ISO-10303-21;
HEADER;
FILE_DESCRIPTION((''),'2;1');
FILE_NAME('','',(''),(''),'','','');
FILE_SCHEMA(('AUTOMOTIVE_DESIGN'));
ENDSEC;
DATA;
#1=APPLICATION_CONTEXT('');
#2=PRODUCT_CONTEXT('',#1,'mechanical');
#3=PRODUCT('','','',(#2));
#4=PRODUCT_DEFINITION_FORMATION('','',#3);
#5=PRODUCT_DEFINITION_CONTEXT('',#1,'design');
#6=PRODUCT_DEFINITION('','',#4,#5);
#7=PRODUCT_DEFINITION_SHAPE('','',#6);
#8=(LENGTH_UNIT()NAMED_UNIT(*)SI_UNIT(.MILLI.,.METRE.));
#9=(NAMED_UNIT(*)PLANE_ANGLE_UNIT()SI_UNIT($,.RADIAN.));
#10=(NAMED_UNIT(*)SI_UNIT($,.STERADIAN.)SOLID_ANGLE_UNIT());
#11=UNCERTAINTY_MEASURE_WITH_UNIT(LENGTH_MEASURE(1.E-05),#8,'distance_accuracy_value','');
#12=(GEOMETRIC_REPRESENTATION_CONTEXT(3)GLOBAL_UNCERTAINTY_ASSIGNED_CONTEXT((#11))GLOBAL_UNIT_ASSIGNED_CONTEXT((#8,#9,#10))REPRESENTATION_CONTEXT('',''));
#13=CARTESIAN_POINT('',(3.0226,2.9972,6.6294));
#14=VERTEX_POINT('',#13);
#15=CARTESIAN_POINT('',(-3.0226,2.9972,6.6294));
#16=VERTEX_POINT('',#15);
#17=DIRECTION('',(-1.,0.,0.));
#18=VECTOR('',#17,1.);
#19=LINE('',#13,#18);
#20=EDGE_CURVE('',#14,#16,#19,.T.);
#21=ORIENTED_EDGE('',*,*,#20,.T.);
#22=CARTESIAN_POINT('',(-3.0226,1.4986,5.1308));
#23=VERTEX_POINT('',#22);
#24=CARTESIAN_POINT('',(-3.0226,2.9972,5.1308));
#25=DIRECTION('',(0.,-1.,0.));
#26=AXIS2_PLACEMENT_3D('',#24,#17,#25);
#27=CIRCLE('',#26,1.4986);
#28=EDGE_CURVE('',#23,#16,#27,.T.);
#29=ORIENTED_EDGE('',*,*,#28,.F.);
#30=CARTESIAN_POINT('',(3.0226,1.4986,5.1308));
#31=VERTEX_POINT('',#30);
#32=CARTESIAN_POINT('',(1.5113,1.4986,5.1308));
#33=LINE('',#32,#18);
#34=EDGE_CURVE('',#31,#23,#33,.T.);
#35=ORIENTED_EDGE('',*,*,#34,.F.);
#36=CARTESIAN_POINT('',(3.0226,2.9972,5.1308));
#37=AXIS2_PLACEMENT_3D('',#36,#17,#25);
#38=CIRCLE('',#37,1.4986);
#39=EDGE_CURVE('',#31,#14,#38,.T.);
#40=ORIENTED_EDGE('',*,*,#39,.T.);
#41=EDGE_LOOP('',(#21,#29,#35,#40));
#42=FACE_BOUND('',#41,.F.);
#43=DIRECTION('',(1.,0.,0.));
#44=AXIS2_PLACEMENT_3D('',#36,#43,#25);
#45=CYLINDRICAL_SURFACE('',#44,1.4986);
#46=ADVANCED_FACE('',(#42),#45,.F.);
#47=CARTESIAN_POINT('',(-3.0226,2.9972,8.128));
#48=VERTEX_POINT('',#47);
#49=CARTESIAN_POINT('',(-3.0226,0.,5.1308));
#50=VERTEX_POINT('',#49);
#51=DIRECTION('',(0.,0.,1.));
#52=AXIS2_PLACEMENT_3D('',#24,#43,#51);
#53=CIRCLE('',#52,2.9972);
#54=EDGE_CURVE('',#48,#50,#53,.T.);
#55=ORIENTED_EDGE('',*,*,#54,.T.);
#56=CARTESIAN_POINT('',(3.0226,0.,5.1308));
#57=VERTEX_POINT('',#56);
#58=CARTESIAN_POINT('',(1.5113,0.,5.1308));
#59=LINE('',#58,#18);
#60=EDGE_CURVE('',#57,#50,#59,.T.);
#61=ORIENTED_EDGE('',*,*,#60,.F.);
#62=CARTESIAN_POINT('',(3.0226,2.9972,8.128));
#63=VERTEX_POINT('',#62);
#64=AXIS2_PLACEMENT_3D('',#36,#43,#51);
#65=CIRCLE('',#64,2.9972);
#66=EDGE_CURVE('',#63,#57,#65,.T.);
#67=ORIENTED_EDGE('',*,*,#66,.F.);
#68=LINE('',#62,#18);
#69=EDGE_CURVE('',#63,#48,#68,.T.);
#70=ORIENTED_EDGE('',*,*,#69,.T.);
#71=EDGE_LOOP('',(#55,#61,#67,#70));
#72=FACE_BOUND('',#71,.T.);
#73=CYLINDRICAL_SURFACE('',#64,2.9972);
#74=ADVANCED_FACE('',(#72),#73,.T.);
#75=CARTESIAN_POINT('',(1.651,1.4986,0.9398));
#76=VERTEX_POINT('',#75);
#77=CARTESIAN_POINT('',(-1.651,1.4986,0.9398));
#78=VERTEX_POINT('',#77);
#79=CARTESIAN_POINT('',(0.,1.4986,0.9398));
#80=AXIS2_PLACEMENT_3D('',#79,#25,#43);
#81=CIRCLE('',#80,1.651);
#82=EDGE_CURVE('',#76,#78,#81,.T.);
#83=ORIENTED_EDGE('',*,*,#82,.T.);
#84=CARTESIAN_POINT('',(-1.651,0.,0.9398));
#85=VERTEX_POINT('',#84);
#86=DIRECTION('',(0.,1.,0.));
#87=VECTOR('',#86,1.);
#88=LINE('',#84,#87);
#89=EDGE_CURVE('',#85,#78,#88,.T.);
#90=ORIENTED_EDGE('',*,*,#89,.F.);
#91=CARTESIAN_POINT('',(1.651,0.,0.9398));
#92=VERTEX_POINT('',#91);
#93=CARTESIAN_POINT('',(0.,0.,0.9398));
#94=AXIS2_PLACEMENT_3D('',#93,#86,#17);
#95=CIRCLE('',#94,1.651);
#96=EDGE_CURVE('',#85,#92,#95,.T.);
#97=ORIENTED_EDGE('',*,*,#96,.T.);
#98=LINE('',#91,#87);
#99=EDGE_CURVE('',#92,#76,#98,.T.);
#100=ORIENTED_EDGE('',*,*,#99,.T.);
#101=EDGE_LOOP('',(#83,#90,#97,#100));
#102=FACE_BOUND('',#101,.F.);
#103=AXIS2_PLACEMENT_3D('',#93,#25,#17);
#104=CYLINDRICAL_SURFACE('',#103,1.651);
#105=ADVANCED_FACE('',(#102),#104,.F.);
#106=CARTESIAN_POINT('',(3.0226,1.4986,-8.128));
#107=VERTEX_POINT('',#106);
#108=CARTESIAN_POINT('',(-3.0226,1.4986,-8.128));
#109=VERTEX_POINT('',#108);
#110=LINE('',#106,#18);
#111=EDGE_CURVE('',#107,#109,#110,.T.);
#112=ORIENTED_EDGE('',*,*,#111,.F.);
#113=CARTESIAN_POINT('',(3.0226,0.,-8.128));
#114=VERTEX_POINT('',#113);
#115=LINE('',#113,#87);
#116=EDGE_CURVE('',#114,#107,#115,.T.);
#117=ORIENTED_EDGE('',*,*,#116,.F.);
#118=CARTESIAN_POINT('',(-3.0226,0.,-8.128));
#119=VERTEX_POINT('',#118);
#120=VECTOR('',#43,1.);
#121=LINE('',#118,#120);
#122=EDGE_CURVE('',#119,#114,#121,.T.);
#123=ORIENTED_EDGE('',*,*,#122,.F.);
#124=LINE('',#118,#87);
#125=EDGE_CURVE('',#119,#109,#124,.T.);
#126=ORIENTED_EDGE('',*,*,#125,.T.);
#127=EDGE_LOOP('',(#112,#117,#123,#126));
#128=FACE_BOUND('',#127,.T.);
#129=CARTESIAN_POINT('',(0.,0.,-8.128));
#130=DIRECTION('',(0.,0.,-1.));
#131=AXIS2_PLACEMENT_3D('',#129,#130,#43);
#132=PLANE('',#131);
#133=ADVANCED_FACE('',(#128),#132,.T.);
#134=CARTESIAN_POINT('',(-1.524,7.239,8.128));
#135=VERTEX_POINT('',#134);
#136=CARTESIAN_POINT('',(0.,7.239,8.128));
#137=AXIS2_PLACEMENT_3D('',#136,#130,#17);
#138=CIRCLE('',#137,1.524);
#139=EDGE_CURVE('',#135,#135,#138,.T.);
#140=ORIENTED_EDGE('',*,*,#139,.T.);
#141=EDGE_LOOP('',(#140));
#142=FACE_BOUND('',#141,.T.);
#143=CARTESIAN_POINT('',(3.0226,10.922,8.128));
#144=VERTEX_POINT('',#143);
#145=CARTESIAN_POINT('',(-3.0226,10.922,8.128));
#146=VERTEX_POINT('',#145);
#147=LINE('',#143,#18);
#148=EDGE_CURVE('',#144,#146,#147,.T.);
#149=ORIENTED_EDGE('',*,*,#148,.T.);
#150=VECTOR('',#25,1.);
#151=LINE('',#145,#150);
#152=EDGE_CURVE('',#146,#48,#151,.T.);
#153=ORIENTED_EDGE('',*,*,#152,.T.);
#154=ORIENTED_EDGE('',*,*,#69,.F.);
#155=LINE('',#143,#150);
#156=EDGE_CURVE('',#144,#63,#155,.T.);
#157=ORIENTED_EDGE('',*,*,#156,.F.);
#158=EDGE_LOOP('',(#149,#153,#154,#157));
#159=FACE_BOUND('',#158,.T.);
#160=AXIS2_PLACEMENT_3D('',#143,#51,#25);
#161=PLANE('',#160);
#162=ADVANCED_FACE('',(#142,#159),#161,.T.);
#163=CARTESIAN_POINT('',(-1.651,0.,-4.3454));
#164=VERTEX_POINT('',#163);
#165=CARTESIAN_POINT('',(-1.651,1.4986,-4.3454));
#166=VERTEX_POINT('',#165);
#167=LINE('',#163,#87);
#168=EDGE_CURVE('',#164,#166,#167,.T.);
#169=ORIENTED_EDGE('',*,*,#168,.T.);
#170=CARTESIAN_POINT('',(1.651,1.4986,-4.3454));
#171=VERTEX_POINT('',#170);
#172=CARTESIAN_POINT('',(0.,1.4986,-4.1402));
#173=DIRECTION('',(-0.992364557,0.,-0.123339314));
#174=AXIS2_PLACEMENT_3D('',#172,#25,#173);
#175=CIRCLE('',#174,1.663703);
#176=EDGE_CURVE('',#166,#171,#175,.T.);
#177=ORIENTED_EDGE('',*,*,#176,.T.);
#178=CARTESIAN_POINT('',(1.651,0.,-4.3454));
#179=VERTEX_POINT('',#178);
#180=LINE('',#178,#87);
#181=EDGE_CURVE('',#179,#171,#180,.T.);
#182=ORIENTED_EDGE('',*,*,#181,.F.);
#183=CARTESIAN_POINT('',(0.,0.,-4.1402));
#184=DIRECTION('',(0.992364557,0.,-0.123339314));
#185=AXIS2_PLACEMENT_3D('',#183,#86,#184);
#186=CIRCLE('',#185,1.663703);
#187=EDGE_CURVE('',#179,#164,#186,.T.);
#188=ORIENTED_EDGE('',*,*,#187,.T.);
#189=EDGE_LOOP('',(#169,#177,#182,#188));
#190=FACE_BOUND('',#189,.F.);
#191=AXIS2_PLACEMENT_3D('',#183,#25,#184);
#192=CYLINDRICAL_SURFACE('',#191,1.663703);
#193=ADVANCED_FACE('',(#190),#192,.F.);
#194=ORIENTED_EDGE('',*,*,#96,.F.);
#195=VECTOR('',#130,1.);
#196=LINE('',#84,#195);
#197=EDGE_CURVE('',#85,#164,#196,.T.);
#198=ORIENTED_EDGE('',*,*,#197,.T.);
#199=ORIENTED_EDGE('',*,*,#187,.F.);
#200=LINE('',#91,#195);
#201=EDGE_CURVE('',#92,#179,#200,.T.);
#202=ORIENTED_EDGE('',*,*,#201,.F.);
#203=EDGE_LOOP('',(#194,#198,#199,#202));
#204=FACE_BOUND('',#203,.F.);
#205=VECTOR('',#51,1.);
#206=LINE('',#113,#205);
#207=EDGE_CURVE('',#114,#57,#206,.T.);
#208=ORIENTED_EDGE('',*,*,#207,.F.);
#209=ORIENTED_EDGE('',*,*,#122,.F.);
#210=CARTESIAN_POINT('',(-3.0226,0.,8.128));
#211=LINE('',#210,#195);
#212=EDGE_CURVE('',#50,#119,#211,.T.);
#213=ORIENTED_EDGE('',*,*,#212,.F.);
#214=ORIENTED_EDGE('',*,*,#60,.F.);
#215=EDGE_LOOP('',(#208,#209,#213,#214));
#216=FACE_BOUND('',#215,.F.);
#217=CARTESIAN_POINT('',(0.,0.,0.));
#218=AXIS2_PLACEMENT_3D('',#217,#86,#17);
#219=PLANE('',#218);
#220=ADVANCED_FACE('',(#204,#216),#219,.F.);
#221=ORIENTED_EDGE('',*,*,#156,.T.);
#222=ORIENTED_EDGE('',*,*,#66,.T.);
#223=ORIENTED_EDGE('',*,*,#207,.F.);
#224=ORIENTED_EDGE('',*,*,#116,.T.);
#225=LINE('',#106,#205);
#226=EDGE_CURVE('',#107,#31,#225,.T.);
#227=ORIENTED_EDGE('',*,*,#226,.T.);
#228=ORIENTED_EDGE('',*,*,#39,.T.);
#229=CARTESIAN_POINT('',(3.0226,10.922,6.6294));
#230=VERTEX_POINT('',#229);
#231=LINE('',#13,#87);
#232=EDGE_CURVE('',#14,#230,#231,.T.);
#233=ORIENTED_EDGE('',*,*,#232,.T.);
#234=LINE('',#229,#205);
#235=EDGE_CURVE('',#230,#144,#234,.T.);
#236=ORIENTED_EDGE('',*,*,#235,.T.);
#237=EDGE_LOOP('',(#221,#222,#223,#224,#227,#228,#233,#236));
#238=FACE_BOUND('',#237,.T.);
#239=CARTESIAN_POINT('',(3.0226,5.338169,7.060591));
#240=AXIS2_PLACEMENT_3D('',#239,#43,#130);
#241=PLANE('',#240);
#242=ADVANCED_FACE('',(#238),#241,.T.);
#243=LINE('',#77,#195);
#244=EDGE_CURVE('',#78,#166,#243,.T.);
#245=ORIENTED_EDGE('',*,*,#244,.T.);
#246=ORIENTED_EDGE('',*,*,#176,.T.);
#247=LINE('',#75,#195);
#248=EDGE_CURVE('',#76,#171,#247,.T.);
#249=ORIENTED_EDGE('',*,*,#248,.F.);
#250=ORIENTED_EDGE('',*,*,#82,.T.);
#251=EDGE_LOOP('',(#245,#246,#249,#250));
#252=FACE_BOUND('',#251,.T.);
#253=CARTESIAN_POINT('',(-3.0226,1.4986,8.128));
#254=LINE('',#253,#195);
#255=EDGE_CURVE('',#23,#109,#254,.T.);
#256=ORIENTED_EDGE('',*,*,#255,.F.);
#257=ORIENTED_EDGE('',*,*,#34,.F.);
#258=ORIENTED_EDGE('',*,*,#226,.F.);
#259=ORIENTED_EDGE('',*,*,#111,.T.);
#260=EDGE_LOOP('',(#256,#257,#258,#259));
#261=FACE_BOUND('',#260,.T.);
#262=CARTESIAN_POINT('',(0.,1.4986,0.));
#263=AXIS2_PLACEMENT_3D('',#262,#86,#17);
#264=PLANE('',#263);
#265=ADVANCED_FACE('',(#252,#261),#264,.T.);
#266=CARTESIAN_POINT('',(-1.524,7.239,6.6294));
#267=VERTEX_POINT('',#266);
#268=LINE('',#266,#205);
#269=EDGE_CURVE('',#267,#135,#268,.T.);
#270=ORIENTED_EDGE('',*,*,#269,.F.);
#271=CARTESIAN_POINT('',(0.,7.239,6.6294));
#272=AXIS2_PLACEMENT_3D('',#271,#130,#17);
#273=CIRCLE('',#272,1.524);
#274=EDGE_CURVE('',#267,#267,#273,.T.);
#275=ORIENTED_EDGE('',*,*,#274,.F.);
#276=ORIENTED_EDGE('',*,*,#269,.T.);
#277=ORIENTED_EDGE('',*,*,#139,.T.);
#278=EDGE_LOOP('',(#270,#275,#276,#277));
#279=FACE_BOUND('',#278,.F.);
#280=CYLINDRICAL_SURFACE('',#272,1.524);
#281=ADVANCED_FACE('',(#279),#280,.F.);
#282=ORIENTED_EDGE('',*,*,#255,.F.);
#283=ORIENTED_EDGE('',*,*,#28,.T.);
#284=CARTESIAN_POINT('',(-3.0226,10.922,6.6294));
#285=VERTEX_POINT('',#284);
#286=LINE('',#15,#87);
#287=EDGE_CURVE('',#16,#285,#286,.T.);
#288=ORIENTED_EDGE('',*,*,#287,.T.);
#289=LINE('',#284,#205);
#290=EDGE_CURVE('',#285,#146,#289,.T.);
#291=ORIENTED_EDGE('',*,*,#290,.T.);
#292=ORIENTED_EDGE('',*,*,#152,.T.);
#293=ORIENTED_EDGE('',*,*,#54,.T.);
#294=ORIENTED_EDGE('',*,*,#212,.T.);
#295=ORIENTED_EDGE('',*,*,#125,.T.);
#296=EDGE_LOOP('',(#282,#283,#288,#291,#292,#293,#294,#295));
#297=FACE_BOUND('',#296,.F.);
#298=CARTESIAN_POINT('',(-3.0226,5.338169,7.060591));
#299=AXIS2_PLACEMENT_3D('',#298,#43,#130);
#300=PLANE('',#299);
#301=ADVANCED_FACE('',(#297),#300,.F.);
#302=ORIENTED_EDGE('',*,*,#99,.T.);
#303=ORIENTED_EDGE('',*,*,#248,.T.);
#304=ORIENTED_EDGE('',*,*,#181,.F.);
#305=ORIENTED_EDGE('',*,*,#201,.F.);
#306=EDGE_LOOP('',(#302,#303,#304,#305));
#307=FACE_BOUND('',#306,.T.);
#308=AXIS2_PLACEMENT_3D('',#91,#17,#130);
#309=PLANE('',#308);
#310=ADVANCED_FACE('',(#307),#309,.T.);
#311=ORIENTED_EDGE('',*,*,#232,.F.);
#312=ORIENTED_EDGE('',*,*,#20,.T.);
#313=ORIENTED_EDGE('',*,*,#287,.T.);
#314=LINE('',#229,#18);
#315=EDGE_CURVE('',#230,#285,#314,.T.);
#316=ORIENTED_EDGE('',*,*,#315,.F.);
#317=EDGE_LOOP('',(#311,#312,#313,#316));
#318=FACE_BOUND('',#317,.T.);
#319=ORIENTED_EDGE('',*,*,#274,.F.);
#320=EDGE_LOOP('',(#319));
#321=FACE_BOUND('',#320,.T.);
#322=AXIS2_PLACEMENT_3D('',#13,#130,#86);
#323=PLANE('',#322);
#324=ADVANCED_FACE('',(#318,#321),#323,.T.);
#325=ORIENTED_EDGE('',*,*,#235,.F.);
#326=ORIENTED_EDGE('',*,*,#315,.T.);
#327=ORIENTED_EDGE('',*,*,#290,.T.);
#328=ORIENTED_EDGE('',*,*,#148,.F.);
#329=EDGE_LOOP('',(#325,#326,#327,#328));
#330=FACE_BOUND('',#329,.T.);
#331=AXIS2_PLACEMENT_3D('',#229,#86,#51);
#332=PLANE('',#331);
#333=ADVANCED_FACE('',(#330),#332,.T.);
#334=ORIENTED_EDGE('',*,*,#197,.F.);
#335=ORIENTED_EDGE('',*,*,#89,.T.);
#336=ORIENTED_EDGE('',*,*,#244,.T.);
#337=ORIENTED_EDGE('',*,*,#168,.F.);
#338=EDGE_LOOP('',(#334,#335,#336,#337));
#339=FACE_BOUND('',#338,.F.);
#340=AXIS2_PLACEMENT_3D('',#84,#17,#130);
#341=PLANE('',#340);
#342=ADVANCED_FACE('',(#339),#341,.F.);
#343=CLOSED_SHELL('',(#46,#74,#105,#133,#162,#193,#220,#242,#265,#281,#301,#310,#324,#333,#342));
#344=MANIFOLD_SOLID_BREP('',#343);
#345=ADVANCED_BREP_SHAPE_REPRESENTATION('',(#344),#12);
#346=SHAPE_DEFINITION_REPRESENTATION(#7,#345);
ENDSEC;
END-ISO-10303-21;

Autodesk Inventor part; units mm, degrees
ref_plane "YZ Plane" through (0, 0, 0) normal (1, 0, 0) x (0, 1, 0)
ref_plane "XZ Plane" through (0, 0, 0) normal (0, 1, 0) x (-1, 0, 0)
ref_plane "XY Plane" through (0, 0, 0) normal (0, 0, 1) x (1, 0, 0)
sketch "Sketch1" plane through (0, 0, 0) normal (0, 1, 0) x (-1, 0, 0)
  line L0 (-3.0226, 8.128) -> (3.0226, 8.128)
  line L1 (3.0226, 8.128) -> (3.0226, -8.128)
  line L2 (3.0226, -8.128) -> (-3.0226, -8.128)
  line L3 (-3.0226, -8.128) -> (-3.0226, 8.128)
  line L4 (-3.0226, 8.128) -> (3.0226, -8.128) construction
  line L5 (3.0226, 8.128) -> (-3.0226, -8.128) construction
  line L6 (1.651, 0.9398) -> (1.651, -4.3454)
  line L7 (-1.651, 0.9398) -> (-1.651, -4.3454)
  arc A0 (-1.651, -4.3454) -> (1.651, -4.3454) centre (0, -4.1402) ccw
  arc A1 (1.651, 0.9398) -> (-1.651, 0.9398) centre (0, 0.9398) ccw
  line L8 (0, 9.1418) -> (0, -10.0518)
  point P0 (0, 0)
  point P1 (0, 8.128)
  dimension "d0" = 16.256
  dimension "d1" = 6.0452
  dimension "d27" = 3.302
  dimension "d28" = 1.6637
  dimension "d29" = 3.0226
  dimension "d30" = 5.08
extrude "Plate1" add sketch "Sketch1" along normal blind 1.4986 contours L0 L8 A1 L7 A0 L2 L3 | L0 L1 L2 L8 A0 L6 A1
sketch "Sketch2" plane through (3.0226, 0, 6.6294) normal (0, 0, 1) x (1, 0, 0)
  line L0 (-6.0452, 0) -> (0, 0)
  line L1 (0, 0) -> (0, 10.922)
  line L2 (0, 10.922) -> (-6.0452, 10.922)
  line L3 (-6.0452, 10.922) -> (-6.0452, 0)
edge flange "Flange1" height 10.922 angle 90 thickness 1.4986 bend radius 1.4986 thickness toward (0, 0, 1) relief straight relief width 1.4986 relief depth 0.7493 edges at (0, 1.4986, 8.128) wall of the first edge with corners at (-3.0226, 0, 6.6294) (3.0226, 0, 6.6294) (3.0226, 10.922, 6.6294) (-3.0226, 10.922, 6.6294)
bend "Bend1"
corner "Corner1"
sketch "Sketch4" plane through (3.0226, 10.922, 6.6294) normal (0, 0, -1) x (-1, 0, 0)
  circle A0 centre (3.0226, -3.683) radius 1.524
  line L0 (6.0452, 0) -> (0, 0) projected
  line L1 (0, -10.922) -> (6.0452, -10.922) projected
  point P0 (3.0226, -10.922)
  dimension "d22" = 3.048
  dimension "d25" = 7.239
extrude "Extrusion3" cut sketch "Sketch4" against normal blind 1.4986
equation "\"d11\" = BendReliefWidth"
equation "\"d12\" = BendReliefDepth"
equation "\"d13\" = MinimumRemnant"
equation "\"d14\" = BendRadius"
equation "\"d17\" = BendRadius"
equation "\"d18\" = CornerReliefSize"
equation "\"d19\" = GapSize"
equation "\"d20\" = JacobiRadiusSize"
equation "\"BendRadius\" = Thickness"
equation "\"BendReliefWidth\" = Thickness"
equation "\"BendReliefDepth\" = 0.5 * Thickness"
equation "\"CornerReliefSize\" = 4 * Thickness"
equation "\"MinimumRemnant\" = 2 * Thickness"
equation "\"TransitionRadius\" = BendRadius"
equation "\"JacobiRadiusSize\" = Thickness"
equation "\"GapSize\" = Thickness"
equation "\"d10\" = BendRadius"
equation "\"Thickness\" = 1.4986"
properties part number "dsub37Bracket"
